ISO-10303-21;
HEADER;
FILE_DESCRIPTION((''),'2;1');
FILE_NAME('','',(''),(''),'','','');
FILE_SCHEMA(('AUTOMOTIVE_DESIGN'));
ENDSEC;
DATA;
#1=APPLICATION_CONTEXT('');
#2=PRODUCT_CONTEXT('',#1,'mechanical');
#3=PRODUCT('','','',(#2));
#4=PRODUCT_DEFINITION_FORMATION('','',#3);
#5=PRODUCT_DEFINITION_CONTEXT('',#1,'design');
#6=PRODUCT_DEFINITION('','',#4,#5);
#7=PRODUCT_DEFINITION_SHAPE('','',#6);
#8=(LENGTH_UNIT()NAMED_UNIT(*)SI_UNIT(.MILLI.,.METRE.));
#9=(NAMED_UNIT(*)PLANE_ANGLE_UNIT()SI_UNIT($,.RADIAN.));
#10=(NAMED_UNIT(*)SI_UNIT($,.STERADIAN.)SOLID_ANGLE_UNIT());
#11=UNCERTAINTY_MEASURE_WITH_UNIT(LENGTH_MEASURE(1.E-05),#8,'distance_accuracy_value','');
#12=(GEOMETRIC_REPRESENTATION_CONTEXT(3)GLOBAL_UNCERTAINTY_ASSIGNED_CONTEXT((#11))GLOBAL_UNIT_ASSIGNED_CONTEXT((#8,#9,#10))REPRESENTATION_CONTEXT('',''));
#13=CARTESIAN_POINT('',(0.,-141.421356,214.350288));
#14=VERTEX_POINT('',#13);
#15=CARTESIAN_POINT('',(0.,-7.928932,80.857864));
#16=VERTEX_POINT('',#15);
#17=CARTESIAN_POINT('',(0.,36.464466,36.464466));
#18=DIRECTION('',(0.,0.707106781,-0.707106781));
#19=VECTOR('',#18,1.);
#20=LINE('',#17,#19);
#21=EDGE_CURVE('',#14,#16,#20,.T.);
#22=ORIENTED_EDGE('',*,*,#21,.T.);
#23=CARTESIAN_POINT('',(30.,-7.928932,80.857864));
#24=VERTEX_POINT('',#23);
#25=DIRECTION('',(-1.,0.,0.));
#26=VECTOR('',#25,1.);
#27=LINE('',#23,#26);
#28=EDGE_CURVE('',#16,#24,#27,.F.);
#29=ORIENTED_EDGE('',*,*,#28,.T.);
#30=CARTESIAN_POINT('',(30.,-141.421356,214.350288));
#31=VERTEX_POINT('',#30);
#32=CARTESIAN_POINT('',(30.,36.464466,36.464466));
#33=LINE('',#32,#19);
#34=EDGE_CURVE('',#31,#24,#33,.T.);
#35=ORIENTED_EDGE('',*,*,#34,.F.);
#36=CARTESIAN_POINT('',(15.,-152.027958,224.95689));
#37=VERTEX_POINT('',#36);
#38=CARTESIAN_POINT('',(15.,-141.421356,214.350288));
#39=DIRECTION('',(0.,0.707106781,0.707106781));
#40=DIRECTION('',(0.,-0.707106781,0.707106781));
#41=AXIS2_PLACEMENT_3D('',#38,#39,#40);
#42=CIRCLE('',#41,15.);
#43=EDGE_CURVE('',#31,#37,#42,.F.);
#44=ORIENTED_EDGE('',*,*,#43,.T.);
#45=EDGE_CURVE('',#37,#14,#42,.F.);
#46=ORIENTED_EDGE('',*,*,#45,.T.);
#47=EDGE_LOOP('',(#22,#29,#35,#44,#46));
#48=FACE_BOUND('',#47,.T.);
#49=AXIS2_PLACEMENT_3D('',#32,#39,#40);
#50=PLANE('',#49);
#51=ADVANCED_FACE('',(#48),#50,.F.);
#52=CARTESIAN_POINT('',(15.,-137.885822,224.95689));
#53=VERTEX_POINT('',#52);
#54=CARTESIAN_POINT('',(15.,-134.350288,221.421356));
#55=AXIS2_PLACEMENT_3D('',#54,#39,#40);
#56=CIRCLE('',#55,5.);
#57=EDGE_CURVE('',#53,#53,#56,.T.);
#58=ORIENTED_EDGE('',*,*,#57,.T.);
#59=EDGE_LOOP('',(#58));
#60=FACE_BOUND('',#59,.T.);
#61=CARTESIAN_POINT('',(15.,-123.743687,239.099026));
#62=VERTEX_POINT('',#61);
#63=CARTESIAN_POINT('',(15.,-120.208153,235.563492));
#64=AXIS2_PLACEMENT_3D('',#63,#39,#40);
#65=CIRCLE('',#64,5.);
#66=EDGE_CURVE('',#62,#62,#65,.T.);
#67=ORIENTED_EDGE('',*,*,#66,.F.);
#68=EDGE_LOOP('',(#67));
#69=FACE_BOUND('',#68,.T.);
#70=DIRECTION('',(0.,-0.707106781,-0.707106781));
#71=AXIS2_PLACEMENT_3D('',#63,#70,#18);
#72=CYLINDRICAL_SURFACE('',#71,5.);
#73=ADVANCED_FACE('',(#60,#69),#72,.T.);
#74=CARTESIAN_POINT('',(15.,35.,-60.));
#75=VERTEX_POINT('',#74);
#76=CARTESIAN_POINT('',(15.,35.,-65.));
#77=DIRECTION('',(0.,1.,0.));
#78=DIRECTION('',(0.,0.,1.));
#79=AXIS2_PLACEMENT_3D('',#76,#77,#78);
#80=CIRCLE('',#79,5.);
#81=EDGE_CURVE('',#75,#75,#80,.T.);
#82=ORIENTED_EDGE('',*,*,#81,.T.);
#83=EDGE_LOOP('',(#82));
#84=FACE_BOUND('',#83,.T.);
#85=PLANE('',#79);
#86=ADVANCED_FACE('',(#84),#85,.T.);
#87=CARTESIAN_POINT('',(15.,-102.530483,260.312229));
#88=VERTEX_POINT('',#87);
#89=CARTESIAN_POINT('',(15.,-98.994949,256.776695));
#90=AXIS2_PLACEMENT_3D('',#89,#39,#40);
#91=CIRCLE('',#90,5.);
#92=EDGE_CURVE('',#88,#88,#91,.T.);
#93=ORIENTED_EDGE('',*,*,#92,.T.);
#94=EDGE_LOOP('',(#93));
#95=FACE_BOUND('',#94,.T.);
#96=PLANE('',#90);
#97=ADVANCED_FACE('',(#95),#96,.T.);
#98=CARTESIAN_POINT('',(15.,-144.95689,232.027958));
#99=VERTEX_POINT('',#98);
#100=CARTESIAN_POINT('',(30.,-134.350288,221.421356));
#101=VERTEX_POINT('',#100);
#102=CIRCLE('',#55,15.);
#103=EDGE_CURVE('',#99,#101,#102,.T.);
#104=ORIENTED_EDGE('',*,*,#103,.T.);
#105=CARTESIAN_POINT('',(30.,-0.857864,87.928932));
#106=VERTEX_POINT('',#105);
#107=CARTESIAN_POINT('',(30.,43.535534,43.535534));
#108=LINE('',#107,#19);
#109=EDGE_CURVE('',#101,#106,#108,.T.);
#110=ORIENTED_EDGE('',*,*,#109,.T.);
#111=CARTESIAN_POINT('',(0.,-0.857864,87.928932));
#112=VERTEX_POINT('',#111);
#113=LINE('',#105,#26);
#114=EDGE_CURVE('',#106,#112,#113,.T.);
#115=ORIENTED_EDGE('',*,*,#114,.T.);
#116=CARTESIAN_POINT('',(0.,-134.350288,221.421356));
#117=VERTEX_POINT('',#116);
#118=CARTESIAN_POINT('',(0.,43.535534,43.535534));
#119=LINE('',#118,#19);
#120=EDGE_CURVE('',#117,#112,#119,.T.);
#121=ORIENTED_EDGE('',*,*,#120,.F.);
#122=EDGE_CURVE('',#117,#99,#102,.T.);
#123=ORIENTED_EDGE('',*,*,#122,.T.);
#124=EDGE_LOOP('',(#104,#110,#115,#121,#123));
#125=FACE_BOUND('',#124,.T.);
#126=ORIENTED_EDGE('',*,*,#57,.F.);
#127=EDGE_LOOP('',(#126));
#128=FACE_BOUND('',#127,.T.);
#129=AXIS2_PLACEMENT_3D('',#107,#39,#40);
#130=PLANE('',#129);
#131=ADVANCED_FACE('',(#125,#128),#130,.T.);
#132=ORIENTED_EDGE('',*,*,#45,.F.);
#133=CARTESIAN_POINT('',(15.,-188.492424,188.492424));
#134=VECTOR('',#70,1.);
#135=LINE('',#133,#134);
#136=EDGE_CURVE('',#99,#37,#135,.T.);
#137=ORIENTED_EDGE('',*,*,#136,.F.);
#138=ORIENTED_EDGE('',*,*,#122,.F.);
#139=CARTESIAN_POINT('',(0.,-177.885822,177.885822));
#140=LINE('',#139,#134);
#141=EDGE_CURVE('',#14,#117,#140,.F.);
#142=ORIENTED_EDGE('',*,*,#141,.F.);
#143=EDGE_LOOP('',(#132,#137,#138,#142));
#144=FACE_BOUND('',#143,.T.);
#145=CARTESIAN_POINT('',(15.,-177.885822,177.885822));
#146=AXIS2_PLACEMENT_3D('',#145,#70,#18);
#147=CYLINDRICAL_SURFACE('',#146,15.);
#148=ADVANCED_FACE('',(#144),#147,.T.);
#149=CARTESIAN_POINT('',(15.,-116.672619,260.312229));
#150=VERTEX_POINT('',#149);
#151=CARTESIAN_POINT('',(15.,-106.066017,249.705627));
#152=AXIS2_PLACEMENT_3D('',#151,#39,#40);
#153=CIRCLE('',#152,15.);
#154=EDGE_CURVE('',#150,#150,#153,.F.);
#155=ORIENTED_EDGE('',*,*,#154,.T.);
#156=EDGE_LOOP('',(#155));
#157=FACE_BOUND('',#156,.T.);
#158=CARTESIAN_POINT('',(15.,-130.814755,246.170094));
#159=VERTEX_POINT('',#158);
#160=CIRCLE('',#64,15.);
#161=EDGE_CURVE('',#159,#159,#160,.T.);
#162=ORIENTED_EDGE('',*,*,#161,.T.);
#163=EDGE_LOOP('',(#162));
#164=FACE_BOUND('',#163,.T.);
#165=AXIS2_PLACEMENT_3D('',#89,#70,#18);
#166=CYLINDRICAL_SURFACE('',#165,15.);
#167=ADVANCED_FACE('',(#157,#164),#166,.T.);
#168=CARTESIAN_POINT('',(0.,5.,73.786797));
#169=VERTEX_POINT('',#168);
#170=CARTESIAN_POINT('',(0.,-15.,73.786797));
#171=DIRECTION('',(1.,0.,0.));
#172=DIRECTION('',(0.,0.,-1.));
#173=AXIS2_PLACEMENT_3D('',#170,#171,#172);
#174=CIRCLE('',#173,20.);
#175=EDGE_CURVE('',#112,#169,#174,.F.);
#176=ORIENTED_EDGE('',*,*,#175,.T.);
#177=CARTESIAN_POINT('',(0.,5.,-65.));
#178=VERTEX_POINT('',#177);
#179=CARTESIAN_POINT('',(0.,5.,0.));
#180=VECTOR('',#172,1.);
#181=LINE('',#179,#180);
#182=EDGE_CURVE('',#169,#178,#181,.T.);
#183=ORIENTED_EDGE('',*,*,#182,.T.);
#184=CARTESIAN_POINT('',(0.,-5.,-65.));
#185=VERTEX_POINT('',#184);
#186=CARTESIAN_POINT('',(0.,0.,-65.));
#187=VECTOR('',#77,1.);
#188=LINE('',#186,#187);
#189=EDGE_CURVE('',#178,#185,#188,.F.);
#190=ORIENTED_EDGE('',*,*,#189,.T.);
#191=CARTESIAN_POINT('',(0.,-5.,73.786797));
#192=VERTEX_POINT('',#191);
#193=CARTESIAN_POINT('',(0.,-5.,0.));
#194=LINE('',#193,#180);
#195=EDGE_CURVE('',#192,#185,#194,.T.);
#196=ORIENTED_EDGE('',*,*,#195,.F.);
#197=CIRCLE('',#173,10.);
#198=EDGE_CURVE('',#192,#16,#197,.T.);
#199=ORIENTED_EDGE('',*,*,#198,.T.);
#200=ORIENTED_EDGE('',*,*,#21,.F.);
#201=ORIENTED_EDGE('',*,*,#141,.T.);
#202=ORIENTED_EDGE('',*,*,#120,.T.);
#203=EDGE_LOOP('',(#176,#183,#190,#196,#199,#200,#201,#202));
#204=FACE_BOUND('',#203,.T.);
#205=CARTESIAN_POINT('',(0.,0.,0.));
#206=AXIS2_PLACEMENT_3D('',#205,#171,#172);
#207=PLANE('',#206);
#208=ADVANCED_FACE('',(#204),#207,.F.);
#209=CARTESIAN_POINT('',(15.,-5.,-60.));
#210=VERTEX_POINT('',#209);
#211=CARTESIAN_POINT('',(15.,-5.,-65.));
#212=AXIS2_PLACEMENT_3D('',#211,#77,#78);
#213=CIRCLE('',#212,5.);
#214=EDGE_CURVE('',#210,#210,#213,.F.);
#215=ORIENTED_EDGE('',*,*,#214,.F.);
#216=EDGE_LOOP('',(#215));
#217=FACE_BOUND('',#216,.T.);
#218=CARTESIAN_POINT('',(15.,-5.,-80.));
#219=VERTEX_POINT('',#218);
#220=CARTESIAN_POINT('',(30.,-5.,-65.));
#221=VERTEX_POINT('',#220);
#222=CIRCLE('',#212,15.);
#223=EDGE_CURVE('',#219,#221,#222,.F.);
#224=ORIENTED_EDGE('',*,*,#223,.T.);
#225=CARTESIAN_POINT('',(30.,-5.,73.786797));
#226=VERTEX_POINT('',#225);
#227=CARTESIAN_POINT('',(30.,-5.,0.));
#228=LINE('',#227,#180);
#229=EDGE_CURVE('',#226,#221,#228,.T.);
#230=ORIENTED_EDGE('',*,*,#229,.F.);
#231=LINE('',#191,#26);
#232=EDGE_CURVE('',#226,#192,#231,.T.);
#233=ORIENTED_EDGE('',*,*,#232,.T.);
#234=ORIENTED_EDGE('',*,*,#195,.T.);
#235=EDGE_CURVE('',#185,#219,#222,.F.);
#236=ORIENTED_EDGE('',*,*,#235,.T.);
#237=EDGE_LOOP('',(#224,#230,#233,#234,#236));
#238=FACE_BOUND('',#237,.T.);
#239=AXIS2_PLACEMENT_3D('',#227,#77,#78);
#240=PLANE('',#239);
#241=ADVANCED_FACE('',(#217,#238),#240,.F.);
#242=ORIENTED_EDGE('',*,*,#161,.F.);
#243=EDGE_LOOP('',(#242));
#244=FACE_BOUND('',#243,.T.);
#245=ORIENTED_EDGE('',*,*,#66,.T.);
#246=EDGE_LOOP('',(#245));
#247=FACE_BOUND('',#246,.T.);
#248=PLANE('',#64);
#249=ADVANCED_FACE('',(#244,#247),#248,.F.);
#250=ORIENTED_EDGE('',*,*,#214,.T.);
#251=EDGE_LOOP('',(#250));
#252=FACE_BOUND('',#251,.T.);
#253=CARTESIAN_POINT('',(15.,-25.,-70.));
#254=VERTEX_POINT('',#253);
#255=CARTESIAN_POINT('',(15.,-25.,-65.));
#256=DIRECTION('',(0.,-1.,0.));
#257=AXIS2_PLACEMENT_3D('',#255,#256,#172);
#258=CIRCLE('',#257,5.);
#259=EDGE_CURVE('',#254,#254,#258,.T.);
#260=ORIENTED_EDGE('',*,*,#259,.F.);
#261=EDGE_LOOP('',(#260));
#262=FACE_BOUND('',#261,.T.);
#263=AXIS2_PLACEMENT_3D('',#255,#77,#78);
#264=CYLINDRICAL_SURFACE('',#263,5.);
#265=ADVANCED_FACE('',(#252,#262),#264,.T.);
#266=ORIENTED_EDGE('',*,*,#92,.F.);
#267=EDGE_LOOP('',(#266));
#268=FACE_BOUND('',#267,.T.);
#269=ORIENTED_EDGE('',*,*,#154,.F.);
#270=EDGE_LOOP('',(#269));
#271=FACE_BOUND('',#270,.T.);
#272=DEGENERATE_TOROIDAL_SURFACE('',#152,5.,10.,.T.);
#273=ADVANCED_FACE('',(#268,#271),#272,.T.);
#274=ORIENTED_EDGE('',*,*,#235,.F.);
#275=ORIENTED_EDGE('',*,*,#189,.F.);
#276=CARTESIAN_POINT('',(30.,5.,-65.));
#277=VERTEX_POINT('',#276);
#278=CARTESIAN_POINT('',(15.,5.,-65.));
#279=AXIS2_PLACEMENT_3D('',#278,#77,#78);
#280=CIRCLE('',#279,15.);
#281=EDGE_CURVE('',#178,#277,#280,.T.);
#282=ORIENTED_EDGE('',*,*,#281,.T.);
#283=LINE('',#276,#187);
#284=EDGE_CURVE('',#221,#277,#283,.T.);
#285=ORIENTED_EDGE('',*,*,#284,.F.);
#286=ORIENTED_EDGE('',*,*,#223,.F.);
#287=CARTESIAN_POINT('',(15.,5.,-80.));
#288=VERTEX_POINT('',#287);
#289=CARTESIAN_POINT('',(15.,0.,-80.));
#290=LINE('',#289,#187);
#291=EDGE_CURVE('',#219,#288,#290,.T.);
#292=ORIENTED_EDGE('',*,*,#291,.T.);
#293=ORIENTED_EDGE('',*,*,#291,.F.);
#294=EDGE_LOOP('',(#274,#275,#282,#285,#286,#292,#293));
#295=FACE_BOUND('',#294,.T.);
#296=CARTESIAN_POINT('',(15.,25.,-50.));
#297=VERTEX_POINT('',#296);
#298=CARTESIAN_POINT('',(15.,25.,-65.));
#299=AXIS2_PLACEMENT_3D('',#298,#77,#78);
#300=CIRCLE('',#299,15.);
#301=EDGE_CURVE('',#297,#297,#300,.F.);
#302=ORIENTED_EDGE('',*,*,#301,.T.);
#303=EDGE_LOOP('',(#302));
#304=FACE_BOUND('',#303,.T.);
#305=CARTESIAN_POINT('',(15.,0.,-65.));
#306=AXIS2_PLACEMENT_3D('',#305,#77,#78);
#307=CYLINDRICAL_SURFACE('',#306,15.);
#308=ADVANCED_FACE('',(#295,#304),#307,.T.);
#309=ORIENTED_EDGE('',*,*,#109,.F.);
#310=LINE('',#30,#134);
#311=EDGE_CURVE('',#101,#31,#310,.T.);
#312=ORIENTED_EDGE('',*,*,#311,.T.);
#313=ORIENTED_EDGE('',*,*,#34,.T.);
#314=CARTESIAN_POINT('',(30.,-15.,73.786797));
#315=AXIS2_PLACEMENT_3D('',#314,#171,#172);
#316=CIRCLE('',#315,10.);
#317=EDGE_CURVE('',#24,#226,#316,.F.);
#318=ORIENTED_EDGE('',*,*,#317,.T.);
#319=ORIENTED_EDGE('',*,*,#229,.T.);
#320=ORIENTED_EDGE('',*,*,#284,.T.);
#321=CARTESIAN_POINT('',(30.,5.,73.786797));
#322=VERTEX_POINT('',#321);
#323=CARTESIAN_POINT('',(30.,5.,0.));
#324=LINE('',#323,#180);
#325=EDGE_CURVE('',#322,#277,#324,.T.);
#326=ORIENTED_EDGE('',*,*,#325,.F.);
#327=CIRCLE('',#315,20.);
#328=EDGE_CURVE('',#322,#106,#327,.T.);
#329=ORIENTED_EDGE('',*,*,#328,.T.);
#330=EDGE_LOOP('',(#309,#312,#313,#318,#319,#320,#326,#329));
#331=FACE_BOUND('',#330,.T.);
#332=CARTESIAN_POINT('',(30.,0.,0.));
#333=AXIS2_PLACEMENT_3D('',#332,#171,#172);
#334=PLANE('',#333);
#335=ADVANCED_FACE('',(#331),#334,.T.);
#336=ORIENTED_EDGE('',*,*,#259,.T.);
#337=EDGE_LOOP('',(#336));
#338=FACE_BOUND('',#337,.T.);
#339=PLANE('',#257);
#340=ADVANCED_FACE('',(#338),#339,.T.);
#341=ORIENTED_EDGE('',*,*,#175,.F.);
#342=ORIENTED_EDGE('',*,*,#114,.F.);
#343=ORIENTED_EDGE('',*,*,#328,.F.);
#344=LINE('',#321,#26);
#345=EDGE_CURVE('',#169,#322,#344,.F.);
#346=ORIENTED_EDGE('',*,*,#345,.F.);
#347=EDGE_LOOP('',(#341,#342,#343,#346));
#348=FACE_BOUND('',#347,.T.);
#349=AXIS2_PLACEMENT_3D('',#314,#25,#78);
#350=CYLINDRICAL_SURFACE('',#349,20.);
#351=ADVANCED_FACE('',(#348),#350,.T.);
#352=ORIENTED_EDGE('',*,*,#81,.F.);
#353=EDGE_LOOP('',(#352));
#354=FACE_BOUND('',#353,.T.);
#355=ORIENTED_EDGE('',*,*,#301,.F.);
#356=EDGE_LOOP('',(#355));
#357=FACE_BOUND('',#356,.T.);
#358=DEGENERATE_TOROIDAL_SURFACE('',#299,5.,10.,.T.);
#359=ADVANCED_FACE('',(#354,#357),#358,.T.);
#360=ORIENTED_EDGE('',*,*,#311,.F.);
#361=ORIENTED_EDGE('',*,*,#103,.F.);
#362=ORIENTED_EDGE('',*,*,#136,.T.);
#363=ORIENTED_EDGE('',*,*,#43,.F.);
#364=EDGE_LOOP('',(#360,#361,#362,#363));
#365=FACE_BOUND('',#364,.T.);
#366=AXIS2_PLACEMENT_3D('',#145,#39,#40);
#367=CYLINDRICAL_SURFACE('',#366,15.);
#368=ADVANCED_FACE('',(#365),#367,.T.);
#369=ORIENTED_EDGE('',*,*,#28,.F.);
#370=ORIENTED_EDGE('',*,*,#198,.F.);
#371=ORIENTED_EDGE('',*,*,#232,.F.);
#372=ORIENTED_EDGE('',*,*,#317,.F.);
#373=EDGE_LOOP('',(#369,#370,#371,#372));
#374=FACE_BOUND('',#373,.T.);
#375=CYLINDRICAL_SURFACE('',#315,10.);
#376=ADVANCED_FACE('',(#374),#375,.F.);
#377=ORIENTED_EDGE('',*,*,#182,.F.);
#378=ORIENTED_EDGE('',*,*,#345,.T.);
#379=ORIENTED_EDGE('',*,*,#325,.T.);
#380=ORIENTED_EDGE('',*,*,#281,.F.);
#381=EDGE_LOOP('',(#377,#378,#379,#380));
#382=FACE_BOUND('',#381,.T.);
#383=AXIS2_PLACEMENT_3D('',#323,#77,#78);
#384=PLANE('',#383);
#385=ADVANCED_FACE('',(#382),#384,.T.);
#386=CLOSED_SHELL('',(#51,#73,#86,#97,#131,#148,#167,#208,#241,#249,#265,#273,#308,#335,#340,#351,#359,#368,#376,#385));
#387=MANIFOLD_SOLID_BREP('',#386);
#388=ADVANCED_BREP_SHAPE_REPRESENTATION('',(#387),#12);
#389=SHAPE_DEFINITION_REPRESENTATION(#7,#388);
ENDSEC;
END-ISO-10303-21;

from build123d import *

# Parameters (mm, degrees)
BOSS_EXTRUDE1_DEPTH = 30
FILLET1_R           = 10
FILLET2_R           = 20
FILLET3_R           = 15
FILLET4_R           = 15
SKETCH2_R           = 5
BOSS_EXTRUDE2_DEPTH = 20
SKETCH3_R           = 15
BOSS_EXTRUDE3_DEPTH = 30
FILLET5_R           = 10
SKETCH4_R           = 5
BOSS_EXTRUDE4_DEPTH = 20
SKETCH5_R           = 15
BOSS_EXTRUDE5_DEPTH = 30
FILLET6_R           = 10


with BuildPart() as part:
    # Sketch1 → Boss-Extrude1 (new body)
    with BuildSketch(Plane(origin=(0, 0, 0), x_dir=(0, 0, -1), z_dir=(1, 0, 0))):
        Polygon((-224.956890143, -152.027957955), (-77.928932188, -5), (80, -5), (80, 5), (-82.071067812, 5), (-232.027957955, -144.956890143), align=None)
    extrude(amount=BOSS_EXTRUDE1_DEPTH)

    # Fillet1
    fillet1_edges = [part.edges().sort_by_distance(p)[0] for p in [
        (15, -5, 77.928932188),
    ]]
    fillet(fillet1_edges, radius=FILLET1_R)

    # Fillet2
    fillet2_edges = [part.edges().sort_by_distance(p)[0] for p in [
        (15, 5, 82.071067812),
    ]]
    fillet(fillet2_edges, radius=FILLET2_R)

    # Fillet3
    fillet3_edges = [part.edges().sort_by_distance(p)[0] for p in [
        (30, -148.492424049, 228.492424049),
        (0, -148.492424049, 228.492424049),
    ]]
    fillet(fillet3_edges, radius=FILLET3_R - 0.0001)  # a hair under: the kernel refuses the full size

    # Fillet4
    fillet4_edges = [part.edges().sort_by_distance(p)[0] for p in [
        (30, 0, -80),
        (0, 0, -80),
    ]]
    fillet(fillet4_edges, radius=FILLET4_R - 0.0001)  # a hair under: the kernel refuses the full size

    # Sketch2 → Boss-Extrude2 (add)
    with BuildSketch(Plane(origin=(0, 43.535533906, 43.535533906), x_dir=(1, 0, 0), z_dir=(0, 0.7071067811865471, 0.7071067811865479))):
        with Locations(Location((15, -251.568542495, 0), (0, 0, 270))):
            Circle(SKETCH2_R)
    extrude(amount=BOSS_EXTRUDE2_DEPTH)

    # Sketch3 → Boss-Extrude3 (add)
    with BuildSketch(Plane(origin=(0, 57.67766953, 57.67766953), x_dir=(1, 0, 0), z_dir=(0, 0.7071067811865471, 0.7071067811865479))):
        with Locations(Location((15, -251.568542495, 0), (0, 0, 270))):
            Circle(SKETCH3_R)
    extrude(amount=BOSS_EXTRUDE3_DEPTH)

    # Fillet5
    fillet5_edges = [part.edges().sort_by_distance(p)[0] for p in [
        (15, -88.388347648, 246.170093579),
    ]]
    fillet(fillet5_edges, radius=FILLET5_R)

    # Sketch4 → Boss-Extrude4 (add)
    with BuildSketch(Plane.XZ.offset(5)):
        with Locations(Location((15, -65, 0), (0, 0, 90))):
            Circle(SKETCH4_R)
    extrude(amount=BOSS_EXTRUDE4_DEPTH)

    # Sketch5 → Boss-Extrude5 (add)
    with BuildSketch(Plane(origin=(0, 5, 0), x_dir=(1, 0, 0), z_dir=(0, 1, 0))):
        with Locations(Location((15, 65, 0), (0, 0, 270))):
            Circle(SKETCH5_R)
    extrude(amount=BOSS_EXTRUDE5_DEPTH)

    # Fillet6
    fillet6_edges = [part.edges().sort_by_distance(p)[0] for p in [
        (15, 35, -80),
    ]]
    fillet(fillet6_edges, radius=FILLET6_R)


solid = part.part
